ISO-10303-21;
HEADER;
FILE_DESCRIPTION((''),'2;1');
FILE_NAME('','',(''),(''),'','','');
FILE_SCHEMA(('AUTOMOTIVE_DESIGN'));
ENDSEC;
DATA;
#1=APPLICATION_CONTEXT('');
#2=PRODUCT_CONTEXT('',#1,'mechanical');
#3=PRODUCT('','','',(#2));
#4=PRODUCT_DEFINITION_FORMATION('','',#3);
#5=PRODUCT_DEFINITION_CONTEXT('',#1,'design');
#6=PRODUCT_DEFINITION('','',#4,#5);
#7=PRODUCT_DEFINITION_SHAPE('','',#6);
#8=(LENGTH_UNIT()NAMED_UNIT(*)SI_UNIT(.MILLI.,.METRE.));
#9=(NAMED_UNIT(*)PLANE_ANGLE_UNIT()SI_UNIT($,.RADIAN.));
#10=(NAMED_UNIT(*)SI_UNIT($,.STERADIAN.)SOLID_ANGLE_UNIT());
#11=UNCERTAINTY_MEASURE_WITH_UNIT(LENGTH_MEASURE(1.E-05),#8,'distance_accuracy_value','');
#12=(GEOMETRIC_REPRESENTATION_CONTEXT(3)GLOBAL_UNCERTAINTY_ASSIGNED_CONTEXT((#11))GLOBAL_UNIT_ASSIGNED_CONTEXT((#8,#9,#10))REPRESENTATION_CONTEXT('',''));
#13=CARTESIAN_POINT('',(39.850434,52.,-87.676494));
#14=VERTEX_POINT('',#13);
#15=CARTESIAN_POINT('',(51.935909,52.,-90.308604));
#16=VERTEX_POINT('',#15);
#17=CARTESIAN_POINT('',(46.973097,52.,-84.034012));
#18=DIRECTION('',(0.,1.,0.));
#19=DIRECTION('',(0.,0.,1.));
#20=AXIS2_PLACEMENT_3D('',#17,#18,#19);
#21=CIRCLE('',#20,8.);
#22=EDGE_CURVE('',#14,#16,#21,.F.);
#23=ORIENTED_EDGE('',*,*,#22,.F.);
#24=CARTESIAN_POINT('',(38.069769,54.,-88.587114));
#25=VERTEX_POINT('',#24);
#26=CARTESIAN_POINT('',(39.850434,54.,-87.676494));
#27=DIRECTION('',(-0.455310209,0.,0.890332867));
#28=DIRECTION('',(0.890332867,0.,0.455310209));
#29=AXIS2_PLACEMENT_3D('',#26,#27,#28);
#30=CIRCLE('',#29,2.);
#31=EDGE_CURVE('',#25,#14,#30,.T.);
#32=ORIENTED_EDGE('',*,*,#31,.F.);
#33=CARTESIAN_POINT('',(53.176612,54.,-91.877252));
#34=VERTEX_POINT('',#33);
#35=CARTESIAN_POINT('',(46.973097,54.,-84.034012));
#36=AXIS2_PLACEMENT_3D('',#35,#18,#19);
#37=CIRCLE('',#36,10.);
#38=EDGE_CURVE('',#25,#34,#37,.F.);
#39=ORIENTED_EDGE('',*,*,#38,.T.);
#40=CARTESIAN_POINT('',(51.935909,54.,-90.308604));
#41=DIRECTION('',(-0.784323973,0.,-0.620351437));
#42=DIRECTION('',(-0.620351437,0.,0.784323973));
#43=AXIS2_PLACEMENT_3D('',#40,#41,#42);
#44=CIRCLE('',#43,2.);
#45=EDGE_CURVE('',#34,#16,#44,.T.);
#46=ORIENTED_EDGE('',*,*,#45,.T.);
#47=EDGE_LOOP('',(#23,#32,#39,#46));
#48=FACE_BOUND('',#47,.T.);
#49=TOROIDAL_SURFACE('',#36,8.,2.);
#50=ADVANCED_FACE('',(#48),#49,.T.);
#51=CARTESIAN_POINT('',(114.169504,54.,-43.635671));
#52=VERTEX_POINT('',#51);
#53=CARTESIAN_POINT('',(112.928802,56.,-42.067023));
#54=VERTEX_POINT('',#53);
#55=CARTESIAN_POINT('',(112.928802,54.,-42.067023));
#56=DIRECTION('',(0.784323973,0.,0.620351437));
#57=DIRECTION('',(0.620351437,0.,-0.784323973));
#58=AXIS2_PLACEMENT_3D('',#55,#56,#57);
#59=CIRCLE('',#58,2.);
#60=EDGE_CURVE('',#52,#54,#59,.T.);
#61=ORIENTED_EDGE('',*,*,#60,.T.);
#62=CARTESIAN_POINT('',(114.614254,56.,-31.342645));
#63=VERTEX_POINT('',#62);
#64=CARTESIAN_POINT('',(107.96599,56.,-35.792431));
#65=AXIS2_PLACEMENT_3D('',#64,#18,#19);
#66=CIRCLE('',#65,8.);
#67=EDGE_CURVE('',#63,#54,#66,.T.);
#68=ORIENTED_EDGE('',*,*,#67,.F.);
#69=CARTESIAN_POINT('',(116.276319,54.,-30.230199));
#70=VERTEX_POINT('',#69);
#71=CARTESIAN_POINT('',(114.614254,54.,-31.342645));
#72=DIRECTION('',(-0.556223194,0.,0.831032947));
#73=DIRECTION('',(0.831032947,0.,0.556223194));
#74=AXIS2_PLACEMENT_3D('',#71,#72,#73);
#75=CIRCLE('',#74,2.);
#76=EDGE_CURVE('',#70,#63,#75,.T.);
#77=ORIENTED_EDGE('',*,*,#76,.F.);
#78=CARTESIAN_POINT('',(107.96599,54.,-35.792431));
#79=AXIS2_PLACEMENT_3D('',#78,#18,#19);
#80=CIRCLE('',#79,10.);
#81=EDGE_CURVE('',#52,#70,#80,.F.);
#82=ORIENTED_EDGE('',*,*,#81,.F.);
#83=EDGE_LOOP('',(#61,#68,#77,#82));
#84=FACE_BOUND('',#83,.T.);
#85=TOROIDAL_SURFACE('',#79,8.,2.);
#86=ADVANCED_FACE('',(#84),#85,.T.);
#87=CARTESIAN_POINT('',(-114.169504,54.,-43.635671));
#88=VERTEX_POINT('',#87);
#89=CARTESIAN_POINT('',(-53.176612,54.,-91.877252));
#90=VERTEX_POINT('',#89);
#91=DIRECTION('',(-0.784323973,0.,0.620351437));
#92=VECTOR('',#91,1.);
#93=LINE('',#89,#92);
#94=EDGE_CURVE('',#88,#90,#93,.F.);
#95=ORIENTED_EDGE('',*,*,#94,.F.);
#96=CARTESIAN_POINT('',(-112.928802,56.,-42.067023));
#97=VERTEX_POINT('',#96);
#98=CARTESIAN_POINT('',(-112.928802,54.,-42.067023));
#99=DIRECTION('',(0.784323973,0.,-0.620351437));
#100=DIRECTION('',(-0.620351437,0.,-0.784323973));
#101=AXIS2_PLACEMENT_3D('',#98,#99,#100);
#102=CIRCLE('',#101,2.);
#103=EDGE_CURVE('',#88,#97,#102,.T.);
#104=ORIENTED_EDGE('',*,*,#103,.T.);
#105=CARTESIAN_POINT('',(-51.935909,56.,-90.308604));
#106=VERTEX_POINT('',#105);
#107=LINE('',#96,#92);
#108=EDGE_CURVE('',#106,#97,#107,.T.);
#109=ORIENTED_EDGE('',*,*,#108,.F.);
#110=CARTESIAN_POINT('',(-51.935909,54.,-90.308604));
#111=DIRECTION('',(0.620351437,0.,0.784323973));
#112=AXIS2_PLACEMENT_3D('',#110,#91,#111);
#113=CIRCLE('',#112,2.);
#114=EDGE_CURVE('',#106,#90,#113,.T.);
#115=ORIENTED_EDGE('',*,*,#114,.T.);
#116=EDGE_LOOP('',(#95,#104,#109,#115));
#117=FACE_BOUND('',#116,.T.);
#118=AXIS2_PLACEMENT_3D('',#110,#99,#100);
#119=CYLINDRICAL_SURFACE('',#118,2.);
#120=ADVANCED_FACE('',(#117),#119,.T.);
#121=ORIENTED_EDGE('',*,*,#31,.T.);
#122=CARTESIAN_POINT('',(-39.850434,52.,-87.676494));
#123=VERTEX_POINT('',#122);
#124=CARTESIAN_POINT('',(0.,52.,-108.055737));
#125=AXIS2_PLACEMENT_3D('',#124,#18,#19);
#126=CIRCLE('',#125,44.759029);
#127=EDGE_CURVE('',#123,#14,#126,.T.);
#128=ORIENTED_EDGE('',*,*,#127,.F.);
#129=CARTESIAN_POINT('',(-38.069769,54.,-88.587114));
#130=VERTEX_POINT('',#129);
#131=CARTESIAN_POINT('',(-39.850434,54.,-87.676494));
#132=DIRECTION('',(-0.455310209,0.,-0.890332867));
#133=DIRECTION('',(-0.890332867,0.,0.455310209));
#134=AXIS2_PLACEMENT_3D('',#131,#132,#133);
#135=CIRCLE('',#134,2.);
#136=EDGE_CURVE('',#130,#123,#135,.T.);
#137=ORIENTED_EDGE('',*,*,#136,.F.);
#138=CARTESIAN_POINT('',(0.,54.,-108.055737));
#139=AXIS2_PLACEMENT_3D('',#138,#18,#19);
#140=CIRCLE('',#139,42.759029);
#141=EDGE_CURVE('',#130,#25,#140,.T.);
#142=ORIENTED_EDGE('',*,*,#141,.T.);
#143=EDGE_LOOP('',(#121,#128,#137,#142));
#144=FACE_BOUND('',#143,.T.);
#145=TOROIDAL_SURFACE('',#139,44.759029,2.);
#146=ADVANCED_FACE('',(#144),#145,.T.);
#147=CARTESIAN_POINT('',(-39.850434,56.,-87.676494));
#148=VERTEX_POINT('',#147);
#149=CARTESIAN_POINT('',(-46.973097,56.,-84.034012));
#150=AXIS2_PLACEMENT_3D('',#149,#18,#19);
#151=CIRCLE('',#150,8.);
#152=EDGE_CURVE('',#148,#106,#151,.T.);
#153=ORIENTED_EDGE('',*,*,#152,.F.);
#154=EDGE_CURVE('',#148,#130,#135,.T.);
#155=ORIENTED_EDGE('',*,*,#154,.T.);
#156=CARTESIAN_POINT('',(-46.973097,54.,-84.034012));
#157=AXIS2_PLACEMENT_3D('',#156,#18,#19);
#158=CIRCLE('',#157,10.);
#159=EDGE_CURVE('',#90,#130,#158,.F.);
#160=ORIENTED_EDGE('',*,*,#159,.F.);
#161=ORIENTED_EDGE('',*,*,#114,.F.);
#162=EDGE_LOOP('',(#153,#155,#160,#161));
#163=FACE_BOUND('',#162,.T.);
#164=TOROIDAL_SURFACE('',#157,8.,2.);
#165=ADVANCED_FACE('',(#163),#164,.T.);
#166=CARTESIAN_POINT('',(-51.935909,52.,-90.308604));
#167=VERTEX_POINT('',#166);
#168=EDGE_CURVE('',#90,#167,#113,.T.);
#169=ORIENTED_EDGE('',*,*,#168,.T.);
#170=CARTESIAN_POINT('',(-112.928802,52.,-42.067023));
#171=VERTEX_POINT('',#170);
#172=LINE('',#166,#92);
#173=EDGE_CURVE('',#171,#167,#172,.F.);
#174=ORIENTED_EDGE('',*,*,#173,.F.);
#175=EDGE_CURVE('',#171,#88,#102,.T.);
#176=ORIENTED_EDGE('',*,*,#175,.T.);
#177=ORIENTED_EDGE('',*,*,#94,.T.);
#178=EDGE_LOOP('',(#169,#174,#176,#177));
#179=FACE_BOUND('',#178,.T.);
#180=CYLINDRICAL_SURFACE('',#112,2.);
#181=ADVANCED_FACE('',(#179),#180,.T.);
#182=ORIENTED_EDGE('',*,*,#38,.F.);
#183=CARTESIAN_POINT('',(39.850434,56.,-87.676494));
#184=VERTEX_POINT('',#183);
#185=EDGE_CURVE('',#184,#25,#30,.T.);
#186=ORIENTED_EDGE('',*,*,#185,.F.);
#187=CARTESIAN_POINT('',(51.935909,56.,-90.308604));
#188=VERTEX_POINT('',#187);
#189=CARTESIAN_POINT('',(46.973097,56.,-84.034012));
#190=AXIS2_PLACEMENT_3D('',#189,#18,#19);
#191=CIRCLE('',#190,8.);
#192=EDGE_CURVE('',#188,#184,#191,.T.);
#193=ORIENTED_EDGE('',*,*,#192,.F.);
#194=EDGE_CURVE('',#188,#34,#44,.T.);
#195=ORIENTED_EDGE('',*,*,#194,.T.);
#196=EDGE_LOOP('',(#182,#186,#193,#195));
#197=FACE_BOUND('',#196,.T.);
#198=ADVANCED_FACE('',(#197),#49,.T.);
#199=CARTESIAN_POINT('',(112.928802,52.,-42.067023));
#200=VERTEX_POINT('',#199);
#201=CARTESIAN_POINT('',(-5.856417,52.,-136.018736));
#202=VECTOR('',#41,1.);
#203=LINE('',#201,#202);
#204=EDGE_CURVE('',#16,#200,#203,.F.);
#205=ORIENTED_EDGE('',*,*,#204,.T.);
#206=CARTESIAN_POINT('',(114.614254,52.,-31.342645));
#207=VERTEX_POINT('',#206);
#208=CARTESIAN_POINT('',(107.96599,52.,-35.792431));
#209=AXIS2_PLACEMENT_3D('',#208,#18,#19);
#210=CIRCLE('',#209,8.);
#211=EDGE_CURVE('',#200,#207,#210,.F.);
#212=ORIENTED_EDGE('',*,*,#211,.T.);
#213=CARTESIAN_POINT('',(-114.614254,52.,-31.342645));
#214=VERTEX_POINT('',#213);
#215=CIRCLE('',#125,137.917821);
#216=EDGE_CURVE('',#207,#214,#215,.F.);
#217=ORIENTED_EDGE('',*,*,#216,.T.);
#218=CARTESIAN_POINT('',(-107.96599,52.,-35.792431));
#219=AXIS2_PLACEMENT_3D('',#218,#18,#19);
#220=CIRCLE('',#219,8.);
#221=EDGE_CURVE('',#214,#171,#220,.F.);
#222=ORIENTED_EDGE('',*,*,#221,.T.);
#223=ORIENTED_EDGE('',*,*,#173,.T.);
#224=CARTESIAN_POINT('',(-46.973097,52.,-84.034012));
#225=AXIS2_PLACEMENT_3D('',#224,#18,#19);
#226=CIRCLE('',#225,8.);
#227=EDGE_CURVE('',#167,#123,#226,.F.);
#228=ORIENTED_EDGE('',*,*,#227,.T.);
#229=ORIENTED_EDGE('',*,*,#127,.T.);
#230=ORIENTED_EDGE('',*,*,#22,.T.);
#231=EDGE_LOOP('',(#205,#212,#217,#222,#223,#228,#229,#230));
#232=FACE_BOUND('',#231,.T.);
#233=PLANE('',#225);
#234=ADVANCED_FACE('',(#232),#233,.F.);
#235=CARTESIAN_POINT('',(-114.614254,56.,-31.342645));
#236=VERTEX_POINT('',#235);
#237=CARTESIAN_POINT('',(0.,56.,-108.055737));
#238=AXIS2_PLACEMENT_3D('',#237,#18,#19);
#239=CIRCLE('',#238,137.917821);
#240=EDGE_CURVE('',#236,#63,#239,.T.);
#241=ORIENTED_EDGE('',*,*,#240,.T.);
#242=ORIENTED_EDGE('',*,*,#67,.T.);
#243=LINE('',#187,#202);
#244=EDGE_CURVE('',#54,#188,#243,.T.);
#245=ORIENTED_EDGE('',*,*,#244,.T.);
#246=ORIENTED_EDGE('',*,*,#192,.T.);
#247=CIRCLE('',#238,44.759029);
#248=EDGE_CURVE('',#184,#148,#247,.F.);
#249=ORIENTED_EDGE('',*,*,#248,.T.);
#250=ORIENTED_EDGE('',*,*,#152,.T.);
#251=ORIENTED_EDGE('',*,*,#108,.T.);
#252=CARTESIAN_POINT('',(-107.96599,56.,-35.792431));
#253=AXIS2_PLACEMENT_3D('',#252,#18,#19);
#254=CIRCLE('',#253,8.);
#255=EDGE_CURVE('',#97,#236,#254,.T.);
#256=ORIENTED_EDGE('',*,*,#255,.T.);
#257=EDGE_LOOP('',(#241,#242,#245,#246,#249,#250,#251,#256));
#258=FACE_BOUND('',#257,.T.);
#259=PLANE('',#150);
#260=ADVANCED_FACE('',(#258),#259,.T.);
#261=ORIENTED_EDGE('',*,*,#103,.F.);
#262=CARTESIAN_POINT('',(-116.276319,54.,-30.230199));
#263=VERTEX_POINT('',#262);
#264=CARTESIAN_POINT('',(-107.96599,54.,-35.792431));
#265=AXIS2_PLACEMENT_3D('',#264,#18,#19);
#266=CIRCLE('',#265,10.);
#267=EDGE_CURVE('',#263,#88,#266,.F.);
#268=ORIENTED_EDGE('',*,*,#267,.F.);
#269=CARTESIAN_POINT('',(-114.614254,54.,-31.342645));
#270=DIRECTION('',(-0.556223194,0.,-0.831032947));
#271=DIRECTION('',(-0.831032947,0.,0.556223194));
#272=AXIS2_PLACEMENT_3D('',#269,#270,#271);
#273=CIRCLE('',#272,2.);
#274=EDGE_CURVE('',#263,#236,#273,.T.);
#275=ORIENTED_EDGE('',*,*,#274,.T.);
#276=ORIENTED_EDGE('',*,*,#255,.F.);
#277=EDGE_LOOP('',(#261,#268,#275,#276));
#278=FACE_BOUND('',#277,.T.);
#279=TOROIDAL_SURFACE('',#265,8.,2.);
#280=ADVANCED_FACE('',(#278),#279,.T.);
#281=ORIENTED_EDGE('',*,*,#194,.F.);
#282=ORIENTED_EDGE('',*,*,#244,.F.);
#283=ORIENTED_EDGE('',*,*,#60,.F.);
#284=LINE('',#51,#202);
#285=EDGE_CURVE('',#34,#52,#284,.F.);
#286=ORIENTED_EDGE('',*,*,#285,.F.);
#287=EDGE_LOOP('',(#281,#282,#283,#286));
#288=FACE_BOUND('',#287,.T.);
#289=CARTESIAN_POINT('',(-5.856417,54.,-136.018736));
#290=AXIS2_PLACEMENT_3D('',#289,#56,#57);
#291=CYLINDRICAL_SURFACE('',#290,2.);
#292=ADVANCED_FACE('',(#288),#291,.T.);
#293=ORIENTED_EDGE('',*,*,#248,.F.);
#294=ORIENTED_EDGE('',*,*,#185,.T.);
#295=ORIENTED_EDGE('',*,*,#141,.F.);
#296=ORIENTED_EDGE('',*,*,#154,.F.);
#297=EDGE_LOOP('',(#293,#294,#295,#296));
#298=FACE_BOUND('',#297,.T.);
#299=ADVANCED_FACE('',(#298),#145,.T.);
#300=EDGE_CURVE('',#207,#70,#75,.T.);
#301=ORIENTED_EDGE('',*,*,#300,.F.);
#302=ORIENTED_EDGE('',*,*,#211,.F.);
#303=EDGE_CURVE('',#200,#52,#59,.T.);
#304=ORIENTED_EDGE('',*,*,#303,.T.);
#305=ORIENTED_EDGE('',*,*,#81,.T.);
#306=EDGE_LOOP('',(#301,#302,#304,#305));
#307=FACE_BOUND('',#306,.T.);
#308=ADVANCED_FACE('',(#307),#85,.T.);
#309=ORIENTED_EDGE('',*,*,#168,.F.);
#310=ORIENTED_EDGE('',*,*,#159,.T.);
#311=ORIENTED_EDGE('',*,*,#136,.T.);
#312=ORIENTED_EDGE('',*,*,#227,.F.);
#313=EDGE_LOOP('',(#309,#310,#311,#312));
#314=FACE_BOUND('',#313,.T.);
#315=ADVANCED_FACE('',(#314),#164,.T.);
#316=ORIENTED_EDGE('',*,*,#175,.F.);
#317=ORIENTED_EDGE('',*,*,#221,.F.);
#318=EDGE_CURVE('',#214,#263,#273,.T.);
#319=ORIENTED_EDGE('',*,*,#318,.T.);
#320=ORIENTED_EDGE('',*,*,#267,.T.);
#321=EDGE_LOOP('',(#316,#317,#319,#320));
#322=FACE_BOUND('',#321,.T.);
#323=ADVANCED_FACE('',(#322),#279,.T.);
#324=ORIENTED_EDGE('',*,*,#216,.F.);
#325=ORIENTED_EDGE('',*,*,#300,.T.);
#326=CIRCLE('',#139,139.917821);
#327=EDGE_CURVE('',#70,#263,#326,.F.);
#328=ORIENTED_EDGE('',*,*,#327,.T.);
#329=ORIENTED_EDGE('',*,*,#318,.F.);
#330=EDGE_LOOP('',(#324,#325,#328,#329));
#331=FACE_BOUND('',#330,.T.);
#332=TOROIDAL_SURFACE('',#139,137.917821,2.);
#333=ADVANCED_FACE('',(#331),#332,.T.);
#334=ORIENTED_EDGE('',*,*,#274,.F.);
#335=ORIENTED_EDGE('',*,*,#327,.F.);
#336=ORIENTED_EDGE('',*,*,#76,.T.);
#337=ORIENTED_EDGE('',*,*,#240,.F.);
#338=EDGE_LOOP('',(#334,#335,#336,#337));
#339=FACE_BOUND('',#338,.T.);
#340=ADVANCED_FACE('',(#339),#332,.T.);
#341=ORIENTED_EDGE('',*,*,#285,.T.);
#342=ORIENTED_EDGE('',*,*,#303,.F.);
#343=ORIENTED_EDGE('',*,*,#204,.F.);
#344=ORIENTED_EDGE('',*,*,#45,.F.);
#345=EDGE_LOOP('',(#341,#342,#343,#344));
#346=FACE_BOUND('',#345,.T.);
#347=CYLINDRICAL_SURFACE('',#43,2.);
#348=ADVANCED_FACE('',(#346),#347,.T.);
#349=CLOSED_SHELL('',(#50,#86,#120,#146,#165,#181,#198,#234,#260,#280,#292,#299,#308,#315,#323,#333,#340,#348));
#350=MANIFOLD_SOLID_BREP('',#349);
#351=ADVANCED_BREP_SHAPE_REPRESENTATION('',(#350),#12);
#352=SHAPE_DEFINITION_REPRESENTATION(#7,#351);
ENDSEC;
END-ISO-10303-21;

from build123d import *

# Parameters (mm, degrees)
BOSS_EXTRUDE1_DEPTH = 4
FILLET1_R           = 2


with BuildPart() as part:
    # Sketch19 → Boss-Extrude1 (new body)
    with BuildSketch(Plane(origin=(0, 52, 0), x_dir=(1, 0, 0), z_dir=(0, 1, 0))):
        with BuildLine():
            Line((-53.176611718, 91.877251824), (-114.16950438, 43.635670657))
            ThreePointArc((-114.16950438, 43.635670657), (-117.84473403, 37.344982568), (-116.276319478, 30.230198988))
            ThreePointArc((-116.276319478, 30.230198988), (0, -31.862084944), (116.276319478, 30.230198988))
            ThreePointArc((116.276319478, 30.230198988), (117.84473403, 37.344982568), (114.16950438, 43.635670657))
            Line((114.16950438, 43.635670657), (53.176611718, 91.877251824))
            ThreePointArc((53.176611718, 91.877251824), (44.845069921, 93.804963904), (38.069768681, 88.587114185))
            ThreePointArc((38.069768681, 88.587114185), (0, 65.296707731), (-38.069768681, 88.587114185))
            ThreePointArc((-38.069768681, 88.587114185), (-44.845069921, 93.804963904), (-53.176611718, 91.877251824))
        make_face()
    extrude(amount=BOSS_EXTRUDE1_DEPTH)

    # Fillet1
    fillet1_edges = [part.edges().sort_by_distance(p)[0] for p in [
        (-83.673058049, 52, -67.75646124),
        (-117.84473403, 52, -37.344982568),
        (0, 52, 31.862084944),
        (117.84473403, 52, -37.344982568),
        (83.673058049, 52, -67.75646124),
        (44.845069921, 52, -93.804963904),
        (0, 52, -65.296707731),
        (-44.845069921, 52, -93.804963904),
        (0, 56, -65.296707731),
        (44.845069921, 56, -93.804963904),
        (83.673058049, 56, -67.75646124),
        (117.84473403, 56, -37.344982568),
        (0, 56, 31.862084944),
        (-117.84473403, 56, -37.344982568),
        (-83.673058049, 56, -67.75646124),
        (-44.845069921, 56, -93.804963904),
    ]]
    fillet(fillet1_edges, radius=FILLET1_R - 0.0001)  # a hair under: the kernel refuses the full size


solid = part.part
